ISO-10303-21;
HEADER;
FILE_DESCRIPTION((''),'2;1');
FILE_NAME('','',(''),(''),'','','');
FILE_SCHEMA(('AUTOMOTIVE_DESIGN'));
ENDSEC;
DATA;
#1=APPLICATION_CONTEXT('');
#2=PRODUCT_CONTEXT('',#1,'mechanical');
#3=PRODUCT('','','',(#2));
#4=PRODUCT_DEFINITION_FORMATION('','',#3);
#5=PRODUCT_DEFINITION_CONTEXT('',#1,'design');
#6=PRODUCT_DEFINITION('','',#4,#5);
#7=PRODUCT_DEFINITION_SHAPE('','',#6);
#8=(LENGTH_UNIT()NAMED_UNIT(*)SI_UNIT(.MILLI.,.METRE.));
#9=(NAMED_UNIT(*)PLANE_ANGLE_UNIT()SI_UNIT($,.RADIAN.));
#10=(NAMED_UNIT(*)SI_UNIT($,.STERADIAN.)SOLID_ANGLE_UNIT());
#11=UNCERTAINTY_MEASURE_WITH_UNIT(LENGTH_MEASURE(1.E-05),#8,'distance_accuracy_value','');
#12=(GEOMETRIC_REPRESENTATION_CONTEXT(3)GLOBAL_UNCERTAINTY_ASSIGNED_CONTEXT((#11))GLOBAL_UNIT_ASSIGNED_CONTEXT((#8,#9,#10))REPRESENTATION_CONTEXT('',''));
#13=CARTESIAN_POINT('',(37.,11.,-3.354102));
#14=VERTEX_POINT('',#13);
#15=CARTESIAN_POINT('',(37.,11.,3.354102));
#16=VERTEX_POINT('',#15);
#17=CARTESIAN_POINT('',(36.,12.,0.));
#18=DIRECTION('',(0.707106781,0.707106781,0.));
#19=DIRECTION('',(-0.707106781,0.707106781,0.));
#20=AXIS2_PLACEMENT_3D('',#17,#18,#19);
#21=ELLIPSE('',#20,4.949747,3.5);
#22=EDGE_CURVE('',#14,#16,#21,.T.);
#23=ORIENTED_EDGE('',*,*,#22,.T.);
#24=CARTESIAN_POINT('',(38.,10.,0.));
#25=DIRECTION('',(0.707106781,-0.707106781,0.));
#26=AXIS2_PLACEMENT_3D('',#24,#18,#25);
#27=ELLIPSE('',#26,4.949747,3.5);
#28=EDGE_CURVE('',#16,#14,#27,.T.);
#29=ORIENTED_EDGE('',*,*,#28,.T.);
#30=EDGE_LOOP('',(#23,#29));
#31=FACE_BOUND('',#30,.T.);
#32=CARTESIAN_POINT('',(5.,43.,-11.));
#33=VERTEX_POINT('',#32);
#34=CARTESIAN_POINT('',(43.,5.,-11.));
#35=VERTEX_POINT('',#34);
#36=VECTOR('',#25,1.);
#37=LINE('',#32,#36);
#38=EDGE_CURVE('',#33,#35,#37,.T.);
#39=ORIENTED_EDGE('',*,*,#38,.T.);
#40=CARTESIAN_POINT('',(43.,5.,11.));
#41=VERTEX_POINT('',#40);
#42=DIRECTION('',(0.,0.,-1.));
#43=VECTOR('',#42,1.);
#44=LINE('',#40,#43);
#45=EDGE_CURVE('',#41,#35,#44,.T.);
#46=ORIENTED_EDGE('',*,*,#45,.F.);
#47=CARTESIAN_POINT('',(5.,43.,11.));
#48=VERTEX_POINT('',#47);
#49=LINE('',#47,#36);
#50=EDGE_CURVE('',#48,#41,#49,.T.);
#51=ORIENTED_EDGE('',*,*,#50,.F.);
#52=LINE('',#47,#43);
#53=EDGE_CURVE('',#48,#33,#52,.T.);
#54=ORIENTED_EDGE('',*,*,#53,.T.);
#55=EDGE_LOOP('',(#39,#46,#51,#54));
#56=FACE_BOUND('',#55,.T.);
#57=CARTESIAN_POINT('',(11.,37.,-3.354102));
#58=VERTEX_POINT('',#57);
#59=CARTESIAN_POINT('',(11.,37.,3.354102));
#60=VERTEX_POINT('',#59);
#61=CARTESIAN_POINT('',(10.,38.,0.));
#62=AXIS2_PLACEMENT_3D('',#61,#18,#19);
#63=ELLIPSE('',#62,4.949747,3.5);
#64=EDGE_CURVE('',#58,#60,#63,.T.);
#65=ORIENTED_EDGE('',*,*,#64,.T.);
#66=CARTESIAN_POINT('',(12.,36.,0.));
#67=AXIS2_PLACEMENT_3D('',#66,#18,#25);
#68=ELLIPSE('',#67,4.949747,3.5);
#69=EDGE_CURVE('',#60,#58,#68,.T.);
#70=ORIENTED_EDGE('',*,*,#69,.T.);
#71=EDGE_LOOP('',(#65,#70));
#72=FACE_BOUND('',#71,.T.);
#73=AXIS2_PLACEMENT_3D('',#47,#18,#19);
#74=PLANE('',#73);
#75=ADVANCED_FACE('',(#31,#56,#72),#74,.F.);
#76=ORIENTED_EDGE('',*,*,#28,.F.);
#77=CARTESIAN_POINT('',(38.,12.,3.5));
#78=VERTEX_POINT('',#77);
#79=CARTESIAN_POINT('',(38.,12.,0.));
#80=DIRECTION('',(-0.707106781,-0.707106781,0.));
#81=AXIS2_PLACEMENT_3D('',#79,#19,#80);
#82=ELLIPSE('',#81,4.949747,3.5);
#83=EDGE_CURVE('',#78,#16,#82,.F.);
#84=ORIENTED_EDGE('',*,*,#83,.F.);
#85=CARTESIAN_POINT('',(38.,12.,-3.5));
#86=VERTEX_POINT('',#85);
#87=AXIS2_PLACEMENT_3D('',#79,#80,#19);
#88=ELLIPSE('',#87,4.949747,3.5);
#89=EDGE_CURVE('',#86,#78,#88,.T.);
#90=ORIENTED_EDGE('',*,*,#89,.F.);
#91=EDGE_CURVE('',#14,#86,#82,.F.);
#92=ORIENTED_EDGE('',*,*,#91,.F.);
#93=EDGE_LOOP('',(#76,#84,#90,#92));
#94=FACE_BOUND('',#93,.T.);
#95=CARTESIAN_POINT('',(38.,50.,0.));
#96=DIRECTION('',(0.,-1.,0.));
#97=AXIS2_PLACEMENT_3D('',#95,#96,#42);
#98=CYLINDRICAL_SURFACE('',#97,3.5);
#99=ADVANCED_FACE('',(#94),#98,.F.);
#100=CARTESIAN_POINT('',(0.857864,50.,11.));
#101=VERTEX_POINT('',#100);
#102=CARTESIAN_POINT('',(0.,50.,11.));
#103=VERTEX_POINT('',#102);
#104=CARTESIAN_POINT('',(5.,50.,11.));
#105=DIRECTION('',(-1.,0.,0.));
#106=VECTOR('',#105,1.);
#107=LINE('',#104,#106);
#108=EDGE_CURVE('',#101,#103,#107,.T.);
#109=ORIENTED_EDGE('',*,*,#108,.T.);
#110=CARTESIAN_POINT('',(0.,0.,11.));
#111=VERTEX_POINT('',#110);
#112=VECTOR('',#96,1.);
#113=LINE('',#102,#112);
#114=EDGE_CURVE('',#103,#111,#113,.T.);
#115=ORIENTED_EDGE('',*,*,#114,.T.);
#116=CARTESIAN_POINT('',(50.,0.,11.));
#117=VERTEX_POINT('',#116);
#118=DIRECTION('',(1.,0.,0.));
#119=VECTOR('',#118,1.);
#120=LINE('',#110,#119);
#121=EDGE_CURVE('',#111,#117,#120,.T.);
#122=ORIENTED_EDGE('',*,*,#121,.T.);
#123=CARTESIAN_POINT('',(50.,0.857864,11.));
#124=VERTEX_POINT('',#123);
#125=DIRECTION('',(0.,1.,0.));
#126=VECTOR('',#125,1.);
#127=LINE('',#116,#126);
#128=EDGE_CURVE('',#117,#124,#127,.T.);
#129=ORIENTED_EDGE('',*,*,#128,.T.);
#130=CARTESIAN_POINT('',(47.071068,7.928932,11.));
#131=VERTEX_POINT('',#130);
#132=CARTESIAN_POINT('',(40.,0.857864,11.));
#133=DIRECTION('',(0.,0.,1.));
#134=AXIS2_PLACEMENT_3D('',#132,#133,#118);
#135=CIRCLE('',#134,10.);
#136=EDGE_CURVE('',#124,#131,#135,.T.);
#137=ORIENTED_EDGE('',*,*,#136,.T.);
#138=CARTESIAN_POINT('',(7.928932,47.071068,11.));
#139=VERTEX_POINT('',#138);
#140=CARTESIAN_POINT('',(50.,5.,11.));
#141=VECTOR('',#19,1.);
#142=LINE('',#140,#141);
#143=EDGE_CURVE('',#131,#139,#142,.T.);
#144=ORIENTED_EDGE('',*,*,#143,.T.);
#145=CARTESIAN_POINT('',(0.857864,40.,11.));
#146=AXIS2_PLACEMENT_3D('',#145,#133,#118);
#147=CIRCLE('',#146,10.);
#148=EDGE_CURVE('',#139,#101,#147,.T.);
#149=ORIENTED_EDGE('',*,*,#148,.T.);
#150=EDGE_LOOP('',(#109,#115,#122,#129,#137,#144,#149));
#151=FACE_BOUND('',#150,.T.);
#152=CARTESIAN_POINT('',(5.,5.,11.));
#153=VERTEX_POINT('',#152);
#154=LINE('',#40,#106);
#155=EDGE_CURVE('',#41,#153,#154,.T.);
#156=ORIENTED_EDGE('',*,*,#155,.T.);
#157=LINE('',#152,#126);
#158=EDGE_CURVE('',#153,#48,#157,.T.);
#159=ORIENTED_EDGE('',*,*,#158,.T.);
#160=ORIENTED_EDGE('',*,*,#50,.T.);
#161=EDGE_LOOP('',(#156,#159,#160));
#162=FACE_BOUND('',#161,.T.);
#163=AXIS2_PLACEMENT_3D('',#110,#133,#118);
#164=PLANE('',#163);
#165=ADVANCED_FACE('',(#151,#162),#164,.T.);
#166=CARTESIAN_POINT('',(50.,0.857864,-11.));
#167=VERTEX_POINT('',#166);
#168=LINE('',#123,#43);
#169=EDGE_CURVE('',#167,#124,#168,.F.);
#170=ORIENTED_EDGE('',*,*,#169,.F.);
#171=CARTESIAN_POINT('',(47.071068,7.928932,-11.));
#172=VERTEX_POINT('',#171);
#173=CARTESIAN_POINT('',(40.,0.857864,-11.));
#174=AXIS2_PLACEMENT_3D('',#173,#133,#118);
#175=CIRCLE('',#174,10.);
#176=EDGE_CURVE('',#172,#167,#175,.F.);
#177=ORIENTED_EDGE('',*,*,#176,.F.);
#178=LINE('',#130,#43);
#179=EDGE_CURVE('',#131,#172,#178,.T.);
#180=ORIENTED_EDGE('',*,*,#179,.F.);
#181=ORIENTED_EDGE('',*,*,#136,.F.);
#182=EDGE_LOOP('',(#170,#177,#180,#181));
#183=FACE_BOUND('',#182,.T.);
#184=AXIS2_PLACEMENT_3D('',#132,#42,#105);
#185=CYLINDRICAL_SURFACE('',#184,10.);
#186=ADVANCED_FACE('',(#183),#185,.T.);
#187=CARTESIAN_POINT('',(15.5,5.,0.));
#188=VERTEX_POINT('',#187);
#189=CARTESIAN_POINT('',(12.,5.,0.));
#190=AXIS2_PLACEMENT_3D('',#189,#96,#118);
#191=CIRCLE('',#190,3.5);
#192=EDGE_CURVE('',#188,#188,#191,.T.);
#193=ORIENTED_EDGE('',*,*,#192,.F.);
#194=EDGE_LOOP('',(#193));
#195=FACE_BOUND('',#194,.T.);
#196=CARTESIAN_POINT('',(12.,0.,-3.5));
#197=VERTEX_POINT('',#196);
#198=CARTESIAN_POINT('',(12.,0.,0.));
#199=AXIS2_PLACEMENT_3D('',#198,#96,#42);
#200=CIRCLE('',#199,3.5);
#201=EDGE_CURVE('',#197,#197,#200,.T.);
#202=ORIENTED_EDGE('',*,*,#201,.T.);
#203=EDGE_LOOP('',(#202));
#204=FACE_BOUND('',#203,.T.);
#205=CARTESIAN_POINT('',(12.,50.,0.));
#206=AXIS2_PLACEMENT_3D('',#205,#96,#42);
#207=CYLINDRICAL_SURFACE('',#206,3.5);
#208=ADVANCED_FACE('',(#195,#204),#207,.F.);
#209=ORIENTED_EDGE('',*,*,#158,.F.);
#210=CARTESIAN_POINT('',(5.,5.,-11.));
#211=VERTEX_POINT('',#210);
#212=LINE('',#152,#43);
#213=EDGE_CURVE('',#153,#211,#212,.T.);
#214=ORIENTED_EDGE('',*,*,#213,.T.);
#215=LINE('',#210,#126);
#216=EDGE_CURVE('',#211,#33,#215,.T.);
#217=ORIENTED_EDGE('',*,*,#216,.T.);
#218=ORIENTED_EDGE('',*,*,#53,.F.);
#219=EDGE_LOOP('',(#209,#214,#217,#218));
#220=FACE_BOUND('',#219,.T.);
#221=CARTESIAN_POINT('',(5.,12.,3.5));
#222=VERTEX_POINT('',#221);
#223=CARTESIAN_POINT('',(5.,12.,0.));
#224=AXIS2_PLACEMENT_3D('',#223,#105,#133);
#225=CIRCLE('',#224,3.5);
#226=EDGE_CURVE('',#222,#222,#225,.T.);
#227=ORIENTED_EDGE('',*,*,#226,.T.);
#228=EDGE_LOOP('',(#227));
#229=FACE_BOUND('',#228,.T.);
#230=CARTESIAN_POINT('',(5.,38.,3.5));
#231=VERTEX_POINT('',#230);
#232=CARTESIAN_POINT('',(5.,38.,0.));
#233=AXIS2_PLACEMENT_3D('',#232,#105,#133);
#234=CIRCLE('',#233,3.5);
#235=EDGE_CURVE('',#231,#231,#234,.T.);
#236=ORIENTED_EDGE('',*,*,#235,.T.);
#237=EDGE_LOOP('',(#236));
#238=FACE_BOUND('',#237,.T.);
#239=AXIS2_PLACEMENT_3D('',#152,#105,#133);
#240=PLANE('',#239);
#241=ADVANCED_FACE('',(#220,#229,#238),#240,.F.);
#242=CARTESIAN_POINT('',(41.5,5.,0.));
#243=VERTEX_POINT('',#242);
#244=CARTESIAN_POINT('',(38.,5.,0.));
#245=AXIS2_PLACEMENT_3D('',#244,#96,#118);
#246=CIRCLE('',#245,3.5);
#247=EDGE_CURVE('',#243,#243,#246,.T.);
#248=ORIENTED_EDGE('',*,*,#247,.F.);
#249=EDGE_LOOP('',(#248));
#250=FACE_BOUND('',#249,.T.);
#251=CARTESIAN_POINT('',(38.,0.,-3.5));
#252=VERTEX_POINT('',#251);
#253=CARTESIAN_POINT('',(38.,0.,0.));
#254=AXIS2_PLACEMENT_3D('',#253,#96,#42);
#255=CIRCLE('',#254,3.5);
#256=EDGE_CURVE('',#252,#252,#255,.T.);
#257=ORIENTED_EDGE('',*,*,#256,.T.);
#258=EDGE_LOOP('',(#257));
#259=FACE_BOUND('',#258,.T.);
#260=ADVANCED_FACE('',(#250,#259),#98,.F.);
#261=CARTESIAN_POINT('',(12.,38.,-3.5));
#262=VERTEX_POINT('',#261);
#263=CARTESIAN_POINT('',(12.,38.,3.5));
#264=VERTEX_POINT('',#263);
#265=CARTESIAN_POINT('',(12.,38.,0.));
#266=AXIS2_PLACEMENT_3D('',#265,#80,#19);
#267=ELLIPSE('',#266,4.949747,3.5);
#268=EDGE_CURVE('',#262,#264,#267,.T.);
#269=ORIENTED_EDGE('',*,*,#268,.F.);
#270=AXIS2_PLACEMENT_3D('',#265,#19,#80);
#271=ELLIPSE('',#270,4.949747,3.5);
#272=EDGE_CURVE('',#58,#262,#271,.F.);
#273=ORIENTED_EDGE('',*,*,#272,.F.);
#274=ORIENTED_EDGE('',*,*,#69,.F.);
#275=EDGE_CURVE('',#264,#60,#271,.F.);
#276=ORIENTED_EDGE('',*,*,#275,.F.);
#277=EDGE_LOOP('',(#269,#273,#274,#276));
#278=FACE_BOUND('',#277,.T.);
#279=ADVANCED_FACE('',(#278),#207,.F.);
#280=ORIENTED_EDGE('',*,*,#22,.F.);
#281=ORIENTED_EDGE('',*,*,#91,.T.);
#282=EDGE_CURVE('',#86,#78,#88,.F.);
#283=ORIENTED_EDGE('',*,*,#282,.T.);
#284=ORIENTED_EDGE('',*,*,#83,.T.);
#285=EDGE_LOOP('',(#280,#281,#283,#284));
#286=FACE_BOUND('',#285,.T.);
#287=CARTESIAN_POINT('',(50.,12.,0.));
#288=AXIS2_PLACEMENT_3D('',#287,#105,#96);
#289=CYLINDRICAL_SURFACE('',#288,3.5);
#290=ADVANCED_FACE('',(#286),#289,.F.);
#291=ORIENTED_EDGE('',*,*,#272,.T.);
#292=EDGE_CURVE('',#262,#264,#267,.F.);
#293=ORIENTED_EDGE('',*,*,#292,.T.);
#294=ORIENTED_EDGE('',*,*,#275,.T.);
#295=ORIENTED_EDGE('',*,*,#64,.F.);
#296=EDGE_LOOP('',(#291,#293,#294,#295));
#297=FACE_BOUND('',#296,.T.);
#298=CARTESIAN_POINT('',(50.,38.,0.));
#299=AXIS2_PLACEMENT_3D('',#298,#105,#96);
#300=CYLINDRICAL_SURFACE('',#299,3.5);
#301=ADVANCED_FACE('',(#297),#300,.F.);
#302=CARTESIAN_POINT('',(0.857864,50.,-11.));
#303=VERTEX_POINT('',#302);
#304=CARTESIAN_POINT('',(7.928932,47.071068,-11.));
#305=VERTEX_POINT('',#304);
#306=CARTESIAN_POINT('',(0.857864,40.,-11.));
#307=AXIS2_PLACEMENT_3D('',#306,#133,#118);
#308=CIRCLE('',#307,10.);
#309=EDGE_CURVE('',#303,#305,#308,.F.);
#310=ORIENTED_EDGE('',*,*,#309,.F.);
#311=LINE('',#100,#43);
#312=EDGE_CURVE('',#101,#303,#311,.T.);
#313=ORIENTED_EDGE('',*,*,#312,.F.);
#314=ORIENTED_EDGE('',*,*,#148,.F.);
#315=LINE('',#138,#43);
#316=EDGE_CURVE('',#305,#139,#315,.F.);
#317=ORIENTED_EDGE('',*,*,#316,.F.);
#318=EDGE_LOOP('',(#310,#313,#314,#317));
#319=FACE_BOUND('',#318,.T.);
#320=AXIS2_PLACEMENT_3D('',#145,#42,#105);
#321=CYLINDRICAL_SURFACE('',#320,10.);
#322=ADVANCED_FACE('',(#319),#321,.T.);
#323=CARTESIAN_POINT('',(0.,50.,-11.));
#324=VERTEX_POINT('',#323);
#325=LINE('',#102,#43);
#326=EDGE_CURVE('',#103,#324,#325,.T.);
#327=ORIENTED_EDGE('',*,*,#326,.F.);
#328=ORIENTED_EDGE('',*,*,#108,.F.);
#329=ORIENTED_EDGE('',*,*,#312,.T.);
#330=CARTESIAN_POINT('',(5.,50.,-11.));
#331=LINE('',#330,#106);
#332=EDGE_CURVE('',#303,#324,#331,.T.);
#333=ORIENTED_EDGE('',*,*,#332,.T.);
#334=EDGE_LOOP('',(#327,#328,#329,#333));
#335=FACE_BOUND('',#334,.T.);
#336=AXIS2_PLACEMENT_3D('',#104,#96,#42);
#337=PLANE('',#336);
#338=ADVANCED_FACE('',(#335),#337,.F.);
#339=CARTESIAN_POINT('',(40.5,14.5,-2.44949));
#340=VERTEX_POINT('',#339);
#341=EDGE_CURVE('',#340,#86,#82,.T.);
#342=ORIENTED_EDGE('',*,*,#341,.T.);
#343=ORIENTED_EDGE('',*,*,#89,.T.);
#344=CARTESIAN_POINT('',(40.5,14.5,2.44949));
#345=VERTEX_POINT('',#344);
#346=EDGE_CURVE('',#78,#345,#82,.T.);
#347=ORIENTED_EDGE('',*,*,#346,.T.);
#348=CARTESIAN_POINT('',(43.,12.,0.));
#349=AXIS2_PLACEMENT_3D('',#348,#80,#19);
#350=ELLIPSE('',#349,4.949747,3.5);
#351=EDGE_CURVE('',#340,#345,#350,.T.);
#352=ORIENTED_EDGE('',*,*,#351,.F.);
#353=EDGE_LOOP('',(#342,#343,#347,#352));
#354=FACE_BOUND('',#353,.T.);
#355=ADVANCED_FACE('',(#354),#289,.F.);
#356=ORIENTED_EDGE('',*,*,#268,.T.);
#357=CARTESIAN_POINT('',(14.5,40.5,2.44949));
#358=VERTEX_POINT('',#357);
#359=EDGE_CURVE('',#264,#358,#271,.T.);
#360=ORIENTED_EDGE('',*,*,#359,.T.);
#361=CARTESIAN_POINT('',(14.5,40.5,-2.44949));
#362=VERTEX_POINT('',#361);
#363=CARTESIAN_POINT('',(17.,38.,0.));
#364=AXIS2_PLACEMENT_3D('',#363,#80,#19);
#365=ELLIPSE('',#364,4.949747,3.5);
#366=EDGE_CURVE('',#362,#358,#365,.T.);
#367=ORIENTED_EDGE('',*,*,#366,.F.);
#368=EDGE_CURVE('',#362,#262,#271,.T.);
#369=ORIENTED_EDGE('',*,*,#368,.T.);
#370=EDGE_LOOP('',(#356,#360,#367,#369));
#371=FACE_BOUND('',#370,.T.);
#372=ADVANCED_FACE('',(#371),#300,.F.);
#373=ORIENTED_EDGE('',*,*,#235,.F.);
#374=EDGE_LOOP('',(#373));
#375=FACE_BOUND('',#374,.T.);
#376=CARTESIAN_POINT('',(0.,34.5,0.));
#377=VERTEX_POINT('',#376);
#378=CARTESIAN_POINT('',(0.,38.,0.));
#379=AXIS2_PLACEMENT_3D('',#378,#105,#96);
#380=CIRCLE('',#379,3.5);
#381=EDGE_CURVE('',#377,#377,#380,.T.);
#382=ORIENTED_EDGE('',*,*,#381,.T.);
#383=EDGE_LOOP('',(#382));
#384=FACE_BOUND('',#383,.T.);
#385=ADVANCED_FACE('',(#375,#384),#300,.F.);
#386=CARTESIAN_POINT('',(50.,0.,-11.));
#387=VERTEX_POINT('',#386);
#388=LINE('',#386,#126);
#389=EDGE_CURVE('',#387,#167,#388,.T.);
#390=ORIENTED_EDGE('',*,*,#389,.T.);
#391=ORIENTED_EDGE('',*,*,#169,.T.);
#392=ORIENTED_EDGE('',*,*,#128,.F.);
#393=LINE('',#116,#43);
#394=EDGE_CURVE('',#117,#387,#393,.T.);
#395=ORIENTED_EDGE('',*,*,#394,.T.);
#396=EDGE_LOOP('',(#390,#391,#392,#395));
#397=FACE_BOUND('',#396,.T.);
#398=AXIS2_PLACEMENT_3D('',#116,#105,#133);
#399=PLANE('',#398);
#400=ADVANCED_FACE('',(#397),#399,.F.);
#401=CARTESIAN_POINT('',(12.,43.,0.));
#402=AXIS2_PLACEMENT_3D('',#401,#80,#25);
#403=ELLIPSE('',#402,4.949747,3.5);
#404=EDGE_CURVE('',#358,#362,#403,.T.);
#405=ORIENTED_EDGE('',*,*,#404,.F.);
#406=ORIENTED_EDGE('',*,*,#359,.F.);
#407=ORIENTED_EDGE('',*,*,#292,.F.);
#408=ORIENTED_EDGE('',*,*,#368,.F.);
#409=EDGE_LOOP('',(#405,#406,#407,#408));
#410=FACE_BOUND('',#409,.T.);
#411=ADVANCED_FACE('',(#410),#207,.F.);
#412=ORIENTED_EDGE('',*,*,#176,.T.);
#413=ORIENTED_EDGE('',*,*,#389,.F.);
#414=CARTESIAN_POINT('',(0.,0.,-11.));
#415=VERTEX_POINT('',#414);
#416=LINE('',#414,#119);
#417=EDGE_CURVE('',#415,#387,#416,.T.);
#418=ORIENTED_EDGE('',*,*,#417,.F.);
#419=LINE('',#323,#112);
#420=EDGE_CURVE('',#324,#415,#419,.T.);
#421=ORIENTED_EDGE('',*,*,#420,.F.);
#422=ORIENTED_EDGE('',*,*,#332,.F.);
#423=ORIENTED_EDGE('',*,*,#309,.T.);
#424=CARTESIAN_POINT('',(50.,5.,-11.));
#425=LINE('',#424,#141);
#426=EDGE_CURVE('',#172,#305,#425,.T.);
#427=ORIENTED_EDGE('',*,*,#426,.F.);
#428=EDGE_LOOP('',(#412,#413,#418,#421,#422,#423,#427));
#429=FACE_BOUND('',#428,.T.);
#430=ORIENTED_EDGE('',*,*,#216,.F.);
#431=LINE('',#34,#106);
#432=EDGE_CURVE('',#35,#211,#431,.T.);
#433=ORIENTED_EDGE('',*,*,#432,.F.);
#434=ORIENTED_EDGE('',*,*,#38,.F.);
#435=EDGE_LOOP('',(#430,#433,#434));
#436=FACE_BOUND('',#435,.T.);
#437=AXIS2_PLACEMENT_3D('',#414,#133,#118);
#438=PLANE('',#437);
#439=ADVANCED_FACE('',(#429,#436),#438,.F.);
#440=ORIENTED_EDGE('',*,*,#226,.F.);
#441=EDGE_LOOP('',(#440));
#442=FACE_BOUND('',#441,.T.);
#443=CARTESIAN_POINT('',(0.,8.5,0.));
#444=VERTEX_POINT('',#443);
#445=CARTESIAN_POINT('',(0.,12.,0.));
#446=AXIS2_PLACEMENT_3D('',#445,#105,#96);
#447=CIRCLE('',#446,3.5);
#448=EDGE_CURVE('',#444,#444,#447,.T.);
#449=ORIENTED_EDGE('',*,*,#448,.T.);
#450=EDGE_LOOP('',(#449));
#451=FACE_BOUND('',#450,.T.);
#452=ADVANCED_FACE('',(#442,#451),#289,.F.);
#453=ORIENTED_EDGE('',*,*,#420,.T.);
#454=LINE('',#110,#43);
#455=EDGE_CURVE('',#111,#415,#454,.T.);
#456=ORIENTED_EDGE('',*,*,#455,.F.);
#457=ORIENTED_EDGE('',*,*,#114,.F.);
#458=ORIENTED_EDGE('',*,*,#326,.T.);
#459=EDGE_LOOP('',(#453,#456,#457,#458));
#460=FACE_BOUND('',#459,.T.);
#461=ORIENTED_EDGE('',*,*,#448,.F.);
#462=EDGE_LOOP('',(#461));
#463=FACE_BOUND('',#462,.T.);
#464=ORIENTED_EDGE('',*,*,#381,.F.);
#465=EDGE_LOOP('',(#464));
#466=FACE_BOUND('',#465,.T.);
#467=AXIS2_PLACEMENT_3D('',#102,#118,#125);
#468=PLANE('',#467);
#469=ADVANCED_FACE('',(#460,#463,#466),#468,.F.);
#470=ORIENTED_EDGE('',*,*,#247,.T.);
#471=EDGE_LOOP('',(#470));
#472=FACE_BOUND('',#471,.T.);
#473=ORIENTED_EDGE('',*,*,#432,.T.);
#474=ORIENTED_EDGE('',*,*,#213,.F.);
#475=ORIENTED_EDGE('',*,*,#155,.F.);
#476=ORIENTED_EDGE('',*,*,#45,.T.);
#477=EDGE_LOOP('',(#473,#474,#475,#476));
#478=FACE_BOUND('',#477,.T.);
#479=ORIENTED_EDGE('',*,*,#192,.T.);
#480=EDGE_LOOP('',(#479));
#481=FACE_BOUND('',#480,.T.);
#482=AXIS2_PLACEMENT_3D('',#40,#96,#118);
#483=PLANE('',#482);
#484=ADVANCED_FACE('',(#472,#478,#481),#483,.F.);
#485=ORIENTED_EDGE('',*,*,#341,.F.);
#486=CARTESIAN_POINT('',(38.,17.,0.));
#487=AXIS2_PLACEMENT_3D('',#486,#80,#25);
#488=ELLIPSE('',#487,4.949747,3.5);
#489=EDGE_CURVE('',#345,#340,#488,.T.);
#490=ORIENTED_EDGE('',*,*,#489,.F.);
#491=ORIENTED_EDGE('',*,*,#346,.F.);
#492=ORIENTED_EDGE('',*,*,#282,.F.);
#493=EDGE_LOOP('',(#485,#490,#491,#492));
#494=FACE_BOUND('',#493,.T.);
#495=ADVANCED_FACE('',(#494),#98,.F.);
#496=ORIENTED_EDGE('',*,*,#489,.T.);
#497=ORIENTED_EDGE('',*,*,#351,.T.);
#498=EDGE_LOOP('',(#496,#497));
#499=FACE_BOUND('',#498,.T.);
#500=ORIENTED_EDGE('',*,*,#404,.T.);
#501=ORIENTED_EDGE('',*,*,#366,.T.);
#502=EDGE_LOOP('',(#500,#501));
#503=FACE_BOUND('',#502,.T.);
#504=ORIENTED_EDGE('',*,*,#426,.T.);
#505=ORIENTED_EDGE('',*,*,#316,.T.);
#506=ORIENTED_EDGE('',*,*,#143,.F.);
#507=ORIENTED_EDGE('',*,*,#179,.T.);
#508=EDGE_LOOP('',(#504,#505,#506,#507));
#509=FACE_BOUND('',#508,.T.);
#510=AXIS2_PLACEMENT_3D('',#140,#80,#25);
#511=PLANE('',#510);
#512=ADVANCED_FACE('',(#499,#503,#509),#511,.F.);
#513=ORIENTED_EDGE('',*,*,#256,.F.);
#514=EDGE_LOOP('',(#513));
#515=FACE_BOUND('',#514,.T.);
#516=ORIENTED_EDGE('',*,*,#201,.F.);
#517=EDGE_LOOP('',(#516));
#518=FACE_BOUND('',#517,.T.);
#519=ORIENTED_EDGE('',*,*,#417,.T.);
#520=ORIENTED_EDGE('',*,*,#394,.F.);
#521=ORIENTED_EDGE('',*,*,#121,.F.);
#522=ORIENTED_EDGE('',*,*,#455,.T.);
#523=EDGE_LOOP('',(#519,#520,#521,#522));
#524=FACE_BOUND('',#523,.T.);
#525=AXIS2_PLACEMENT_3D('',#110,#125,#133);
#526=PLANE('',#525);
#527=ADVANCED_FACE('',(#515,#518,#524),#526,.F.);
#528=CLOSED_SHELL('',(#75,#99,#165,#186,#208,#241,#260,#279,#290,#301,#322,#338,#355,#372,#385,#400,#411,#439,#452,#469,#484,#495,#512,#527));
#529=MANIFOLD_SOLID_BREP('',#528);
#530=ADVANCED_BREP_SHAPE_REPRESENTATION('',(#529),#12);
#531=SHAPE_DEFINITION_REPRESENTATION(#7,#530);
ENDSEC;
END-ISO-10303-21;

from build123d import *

# Parameters (mm, degrees)
BOSS_EXTRUDE1_DEPTH = 11
FILLET1_R           = 10
FILLET2_R           = 10
SKETCH2_R           = 3.5
CUT_EXTRUDE2_DEPTH  = 72.561162651
CUT_EXTRUDE3_DEPTH  = 46.5


# Read off the part's stored shape, not the designer's step: Cut-Extrude3
with BuildPart() as part:
    # Sketch1 → Boss-Extrude1 (new, symmetric)
    with BuildSketch(Plane.XY):
        Polygon((0, 50), (0, 0), (50, 0), (50, 5), (5, 50), align=None)
        Polygon((43, 5), (5, 5), (5, 43), align=None, mode=Mode.SUBTRACT)
    extrude(amount=BOSS_EXTRUDE1_DEPTH, both=True)

    # Fillet1
    fillet1_edges = [part.edges().sort_by_distance(p)[0] for p in [
        (5, 50, 0),
    ]]
    fillet(fillet1_edges, radius=FILLET1_R)

    # Fillet2
    fillet2_edges = [part.edges().sort_by_distance(p)[0] for p in [
        (50, 5, 0),
    ]]
    fillet(fillet2_edges, radius=FILLET2_R)

    # Sketch2 → Cut-Extrude2 (cut, through all)
    with BuildSketch(Plane.ZY):
        with Locations(Location((0, 38, 0), (0, 0, 270))):
            Circle(SKETCH2_R)
        with Locations(Location((0, 12, 0), (0, 0, 270))):
            Circle(SKETCH2_R)
    extrude(amount=-CUT_EXTRUDE2_DEPTH, mode=Mode.SUBTRACT)

    # Cut-Extrude3 outline → Cut-Extrude3 (cut)
    with BuildSketch(Plane(origin=(0, 0, 0), x_dir=(1, 0, 0), z_dir=(0, 1, 0))):
        with BuildLine():
            ThreePointArc((11, -3.354101966), (15.5, 0), (11, 3.354101966))
            ThreePointArc((11, 3.354101966), (8.5, 0), (11, -3.354101966))
        make_face()
        with BuildLine():
            ThreePointArc((37, -3.354101966), (41.5, 0), (37, 3.354101966))
            ThreePointArc((37, 3.354101966), (34.5, 0), (37, -3.354101966))
        make_face()
    extrude(amount=CUT_EXTRUDE3_DEPTH, mode=Mode.SUBTRACT)


solid = part.part
